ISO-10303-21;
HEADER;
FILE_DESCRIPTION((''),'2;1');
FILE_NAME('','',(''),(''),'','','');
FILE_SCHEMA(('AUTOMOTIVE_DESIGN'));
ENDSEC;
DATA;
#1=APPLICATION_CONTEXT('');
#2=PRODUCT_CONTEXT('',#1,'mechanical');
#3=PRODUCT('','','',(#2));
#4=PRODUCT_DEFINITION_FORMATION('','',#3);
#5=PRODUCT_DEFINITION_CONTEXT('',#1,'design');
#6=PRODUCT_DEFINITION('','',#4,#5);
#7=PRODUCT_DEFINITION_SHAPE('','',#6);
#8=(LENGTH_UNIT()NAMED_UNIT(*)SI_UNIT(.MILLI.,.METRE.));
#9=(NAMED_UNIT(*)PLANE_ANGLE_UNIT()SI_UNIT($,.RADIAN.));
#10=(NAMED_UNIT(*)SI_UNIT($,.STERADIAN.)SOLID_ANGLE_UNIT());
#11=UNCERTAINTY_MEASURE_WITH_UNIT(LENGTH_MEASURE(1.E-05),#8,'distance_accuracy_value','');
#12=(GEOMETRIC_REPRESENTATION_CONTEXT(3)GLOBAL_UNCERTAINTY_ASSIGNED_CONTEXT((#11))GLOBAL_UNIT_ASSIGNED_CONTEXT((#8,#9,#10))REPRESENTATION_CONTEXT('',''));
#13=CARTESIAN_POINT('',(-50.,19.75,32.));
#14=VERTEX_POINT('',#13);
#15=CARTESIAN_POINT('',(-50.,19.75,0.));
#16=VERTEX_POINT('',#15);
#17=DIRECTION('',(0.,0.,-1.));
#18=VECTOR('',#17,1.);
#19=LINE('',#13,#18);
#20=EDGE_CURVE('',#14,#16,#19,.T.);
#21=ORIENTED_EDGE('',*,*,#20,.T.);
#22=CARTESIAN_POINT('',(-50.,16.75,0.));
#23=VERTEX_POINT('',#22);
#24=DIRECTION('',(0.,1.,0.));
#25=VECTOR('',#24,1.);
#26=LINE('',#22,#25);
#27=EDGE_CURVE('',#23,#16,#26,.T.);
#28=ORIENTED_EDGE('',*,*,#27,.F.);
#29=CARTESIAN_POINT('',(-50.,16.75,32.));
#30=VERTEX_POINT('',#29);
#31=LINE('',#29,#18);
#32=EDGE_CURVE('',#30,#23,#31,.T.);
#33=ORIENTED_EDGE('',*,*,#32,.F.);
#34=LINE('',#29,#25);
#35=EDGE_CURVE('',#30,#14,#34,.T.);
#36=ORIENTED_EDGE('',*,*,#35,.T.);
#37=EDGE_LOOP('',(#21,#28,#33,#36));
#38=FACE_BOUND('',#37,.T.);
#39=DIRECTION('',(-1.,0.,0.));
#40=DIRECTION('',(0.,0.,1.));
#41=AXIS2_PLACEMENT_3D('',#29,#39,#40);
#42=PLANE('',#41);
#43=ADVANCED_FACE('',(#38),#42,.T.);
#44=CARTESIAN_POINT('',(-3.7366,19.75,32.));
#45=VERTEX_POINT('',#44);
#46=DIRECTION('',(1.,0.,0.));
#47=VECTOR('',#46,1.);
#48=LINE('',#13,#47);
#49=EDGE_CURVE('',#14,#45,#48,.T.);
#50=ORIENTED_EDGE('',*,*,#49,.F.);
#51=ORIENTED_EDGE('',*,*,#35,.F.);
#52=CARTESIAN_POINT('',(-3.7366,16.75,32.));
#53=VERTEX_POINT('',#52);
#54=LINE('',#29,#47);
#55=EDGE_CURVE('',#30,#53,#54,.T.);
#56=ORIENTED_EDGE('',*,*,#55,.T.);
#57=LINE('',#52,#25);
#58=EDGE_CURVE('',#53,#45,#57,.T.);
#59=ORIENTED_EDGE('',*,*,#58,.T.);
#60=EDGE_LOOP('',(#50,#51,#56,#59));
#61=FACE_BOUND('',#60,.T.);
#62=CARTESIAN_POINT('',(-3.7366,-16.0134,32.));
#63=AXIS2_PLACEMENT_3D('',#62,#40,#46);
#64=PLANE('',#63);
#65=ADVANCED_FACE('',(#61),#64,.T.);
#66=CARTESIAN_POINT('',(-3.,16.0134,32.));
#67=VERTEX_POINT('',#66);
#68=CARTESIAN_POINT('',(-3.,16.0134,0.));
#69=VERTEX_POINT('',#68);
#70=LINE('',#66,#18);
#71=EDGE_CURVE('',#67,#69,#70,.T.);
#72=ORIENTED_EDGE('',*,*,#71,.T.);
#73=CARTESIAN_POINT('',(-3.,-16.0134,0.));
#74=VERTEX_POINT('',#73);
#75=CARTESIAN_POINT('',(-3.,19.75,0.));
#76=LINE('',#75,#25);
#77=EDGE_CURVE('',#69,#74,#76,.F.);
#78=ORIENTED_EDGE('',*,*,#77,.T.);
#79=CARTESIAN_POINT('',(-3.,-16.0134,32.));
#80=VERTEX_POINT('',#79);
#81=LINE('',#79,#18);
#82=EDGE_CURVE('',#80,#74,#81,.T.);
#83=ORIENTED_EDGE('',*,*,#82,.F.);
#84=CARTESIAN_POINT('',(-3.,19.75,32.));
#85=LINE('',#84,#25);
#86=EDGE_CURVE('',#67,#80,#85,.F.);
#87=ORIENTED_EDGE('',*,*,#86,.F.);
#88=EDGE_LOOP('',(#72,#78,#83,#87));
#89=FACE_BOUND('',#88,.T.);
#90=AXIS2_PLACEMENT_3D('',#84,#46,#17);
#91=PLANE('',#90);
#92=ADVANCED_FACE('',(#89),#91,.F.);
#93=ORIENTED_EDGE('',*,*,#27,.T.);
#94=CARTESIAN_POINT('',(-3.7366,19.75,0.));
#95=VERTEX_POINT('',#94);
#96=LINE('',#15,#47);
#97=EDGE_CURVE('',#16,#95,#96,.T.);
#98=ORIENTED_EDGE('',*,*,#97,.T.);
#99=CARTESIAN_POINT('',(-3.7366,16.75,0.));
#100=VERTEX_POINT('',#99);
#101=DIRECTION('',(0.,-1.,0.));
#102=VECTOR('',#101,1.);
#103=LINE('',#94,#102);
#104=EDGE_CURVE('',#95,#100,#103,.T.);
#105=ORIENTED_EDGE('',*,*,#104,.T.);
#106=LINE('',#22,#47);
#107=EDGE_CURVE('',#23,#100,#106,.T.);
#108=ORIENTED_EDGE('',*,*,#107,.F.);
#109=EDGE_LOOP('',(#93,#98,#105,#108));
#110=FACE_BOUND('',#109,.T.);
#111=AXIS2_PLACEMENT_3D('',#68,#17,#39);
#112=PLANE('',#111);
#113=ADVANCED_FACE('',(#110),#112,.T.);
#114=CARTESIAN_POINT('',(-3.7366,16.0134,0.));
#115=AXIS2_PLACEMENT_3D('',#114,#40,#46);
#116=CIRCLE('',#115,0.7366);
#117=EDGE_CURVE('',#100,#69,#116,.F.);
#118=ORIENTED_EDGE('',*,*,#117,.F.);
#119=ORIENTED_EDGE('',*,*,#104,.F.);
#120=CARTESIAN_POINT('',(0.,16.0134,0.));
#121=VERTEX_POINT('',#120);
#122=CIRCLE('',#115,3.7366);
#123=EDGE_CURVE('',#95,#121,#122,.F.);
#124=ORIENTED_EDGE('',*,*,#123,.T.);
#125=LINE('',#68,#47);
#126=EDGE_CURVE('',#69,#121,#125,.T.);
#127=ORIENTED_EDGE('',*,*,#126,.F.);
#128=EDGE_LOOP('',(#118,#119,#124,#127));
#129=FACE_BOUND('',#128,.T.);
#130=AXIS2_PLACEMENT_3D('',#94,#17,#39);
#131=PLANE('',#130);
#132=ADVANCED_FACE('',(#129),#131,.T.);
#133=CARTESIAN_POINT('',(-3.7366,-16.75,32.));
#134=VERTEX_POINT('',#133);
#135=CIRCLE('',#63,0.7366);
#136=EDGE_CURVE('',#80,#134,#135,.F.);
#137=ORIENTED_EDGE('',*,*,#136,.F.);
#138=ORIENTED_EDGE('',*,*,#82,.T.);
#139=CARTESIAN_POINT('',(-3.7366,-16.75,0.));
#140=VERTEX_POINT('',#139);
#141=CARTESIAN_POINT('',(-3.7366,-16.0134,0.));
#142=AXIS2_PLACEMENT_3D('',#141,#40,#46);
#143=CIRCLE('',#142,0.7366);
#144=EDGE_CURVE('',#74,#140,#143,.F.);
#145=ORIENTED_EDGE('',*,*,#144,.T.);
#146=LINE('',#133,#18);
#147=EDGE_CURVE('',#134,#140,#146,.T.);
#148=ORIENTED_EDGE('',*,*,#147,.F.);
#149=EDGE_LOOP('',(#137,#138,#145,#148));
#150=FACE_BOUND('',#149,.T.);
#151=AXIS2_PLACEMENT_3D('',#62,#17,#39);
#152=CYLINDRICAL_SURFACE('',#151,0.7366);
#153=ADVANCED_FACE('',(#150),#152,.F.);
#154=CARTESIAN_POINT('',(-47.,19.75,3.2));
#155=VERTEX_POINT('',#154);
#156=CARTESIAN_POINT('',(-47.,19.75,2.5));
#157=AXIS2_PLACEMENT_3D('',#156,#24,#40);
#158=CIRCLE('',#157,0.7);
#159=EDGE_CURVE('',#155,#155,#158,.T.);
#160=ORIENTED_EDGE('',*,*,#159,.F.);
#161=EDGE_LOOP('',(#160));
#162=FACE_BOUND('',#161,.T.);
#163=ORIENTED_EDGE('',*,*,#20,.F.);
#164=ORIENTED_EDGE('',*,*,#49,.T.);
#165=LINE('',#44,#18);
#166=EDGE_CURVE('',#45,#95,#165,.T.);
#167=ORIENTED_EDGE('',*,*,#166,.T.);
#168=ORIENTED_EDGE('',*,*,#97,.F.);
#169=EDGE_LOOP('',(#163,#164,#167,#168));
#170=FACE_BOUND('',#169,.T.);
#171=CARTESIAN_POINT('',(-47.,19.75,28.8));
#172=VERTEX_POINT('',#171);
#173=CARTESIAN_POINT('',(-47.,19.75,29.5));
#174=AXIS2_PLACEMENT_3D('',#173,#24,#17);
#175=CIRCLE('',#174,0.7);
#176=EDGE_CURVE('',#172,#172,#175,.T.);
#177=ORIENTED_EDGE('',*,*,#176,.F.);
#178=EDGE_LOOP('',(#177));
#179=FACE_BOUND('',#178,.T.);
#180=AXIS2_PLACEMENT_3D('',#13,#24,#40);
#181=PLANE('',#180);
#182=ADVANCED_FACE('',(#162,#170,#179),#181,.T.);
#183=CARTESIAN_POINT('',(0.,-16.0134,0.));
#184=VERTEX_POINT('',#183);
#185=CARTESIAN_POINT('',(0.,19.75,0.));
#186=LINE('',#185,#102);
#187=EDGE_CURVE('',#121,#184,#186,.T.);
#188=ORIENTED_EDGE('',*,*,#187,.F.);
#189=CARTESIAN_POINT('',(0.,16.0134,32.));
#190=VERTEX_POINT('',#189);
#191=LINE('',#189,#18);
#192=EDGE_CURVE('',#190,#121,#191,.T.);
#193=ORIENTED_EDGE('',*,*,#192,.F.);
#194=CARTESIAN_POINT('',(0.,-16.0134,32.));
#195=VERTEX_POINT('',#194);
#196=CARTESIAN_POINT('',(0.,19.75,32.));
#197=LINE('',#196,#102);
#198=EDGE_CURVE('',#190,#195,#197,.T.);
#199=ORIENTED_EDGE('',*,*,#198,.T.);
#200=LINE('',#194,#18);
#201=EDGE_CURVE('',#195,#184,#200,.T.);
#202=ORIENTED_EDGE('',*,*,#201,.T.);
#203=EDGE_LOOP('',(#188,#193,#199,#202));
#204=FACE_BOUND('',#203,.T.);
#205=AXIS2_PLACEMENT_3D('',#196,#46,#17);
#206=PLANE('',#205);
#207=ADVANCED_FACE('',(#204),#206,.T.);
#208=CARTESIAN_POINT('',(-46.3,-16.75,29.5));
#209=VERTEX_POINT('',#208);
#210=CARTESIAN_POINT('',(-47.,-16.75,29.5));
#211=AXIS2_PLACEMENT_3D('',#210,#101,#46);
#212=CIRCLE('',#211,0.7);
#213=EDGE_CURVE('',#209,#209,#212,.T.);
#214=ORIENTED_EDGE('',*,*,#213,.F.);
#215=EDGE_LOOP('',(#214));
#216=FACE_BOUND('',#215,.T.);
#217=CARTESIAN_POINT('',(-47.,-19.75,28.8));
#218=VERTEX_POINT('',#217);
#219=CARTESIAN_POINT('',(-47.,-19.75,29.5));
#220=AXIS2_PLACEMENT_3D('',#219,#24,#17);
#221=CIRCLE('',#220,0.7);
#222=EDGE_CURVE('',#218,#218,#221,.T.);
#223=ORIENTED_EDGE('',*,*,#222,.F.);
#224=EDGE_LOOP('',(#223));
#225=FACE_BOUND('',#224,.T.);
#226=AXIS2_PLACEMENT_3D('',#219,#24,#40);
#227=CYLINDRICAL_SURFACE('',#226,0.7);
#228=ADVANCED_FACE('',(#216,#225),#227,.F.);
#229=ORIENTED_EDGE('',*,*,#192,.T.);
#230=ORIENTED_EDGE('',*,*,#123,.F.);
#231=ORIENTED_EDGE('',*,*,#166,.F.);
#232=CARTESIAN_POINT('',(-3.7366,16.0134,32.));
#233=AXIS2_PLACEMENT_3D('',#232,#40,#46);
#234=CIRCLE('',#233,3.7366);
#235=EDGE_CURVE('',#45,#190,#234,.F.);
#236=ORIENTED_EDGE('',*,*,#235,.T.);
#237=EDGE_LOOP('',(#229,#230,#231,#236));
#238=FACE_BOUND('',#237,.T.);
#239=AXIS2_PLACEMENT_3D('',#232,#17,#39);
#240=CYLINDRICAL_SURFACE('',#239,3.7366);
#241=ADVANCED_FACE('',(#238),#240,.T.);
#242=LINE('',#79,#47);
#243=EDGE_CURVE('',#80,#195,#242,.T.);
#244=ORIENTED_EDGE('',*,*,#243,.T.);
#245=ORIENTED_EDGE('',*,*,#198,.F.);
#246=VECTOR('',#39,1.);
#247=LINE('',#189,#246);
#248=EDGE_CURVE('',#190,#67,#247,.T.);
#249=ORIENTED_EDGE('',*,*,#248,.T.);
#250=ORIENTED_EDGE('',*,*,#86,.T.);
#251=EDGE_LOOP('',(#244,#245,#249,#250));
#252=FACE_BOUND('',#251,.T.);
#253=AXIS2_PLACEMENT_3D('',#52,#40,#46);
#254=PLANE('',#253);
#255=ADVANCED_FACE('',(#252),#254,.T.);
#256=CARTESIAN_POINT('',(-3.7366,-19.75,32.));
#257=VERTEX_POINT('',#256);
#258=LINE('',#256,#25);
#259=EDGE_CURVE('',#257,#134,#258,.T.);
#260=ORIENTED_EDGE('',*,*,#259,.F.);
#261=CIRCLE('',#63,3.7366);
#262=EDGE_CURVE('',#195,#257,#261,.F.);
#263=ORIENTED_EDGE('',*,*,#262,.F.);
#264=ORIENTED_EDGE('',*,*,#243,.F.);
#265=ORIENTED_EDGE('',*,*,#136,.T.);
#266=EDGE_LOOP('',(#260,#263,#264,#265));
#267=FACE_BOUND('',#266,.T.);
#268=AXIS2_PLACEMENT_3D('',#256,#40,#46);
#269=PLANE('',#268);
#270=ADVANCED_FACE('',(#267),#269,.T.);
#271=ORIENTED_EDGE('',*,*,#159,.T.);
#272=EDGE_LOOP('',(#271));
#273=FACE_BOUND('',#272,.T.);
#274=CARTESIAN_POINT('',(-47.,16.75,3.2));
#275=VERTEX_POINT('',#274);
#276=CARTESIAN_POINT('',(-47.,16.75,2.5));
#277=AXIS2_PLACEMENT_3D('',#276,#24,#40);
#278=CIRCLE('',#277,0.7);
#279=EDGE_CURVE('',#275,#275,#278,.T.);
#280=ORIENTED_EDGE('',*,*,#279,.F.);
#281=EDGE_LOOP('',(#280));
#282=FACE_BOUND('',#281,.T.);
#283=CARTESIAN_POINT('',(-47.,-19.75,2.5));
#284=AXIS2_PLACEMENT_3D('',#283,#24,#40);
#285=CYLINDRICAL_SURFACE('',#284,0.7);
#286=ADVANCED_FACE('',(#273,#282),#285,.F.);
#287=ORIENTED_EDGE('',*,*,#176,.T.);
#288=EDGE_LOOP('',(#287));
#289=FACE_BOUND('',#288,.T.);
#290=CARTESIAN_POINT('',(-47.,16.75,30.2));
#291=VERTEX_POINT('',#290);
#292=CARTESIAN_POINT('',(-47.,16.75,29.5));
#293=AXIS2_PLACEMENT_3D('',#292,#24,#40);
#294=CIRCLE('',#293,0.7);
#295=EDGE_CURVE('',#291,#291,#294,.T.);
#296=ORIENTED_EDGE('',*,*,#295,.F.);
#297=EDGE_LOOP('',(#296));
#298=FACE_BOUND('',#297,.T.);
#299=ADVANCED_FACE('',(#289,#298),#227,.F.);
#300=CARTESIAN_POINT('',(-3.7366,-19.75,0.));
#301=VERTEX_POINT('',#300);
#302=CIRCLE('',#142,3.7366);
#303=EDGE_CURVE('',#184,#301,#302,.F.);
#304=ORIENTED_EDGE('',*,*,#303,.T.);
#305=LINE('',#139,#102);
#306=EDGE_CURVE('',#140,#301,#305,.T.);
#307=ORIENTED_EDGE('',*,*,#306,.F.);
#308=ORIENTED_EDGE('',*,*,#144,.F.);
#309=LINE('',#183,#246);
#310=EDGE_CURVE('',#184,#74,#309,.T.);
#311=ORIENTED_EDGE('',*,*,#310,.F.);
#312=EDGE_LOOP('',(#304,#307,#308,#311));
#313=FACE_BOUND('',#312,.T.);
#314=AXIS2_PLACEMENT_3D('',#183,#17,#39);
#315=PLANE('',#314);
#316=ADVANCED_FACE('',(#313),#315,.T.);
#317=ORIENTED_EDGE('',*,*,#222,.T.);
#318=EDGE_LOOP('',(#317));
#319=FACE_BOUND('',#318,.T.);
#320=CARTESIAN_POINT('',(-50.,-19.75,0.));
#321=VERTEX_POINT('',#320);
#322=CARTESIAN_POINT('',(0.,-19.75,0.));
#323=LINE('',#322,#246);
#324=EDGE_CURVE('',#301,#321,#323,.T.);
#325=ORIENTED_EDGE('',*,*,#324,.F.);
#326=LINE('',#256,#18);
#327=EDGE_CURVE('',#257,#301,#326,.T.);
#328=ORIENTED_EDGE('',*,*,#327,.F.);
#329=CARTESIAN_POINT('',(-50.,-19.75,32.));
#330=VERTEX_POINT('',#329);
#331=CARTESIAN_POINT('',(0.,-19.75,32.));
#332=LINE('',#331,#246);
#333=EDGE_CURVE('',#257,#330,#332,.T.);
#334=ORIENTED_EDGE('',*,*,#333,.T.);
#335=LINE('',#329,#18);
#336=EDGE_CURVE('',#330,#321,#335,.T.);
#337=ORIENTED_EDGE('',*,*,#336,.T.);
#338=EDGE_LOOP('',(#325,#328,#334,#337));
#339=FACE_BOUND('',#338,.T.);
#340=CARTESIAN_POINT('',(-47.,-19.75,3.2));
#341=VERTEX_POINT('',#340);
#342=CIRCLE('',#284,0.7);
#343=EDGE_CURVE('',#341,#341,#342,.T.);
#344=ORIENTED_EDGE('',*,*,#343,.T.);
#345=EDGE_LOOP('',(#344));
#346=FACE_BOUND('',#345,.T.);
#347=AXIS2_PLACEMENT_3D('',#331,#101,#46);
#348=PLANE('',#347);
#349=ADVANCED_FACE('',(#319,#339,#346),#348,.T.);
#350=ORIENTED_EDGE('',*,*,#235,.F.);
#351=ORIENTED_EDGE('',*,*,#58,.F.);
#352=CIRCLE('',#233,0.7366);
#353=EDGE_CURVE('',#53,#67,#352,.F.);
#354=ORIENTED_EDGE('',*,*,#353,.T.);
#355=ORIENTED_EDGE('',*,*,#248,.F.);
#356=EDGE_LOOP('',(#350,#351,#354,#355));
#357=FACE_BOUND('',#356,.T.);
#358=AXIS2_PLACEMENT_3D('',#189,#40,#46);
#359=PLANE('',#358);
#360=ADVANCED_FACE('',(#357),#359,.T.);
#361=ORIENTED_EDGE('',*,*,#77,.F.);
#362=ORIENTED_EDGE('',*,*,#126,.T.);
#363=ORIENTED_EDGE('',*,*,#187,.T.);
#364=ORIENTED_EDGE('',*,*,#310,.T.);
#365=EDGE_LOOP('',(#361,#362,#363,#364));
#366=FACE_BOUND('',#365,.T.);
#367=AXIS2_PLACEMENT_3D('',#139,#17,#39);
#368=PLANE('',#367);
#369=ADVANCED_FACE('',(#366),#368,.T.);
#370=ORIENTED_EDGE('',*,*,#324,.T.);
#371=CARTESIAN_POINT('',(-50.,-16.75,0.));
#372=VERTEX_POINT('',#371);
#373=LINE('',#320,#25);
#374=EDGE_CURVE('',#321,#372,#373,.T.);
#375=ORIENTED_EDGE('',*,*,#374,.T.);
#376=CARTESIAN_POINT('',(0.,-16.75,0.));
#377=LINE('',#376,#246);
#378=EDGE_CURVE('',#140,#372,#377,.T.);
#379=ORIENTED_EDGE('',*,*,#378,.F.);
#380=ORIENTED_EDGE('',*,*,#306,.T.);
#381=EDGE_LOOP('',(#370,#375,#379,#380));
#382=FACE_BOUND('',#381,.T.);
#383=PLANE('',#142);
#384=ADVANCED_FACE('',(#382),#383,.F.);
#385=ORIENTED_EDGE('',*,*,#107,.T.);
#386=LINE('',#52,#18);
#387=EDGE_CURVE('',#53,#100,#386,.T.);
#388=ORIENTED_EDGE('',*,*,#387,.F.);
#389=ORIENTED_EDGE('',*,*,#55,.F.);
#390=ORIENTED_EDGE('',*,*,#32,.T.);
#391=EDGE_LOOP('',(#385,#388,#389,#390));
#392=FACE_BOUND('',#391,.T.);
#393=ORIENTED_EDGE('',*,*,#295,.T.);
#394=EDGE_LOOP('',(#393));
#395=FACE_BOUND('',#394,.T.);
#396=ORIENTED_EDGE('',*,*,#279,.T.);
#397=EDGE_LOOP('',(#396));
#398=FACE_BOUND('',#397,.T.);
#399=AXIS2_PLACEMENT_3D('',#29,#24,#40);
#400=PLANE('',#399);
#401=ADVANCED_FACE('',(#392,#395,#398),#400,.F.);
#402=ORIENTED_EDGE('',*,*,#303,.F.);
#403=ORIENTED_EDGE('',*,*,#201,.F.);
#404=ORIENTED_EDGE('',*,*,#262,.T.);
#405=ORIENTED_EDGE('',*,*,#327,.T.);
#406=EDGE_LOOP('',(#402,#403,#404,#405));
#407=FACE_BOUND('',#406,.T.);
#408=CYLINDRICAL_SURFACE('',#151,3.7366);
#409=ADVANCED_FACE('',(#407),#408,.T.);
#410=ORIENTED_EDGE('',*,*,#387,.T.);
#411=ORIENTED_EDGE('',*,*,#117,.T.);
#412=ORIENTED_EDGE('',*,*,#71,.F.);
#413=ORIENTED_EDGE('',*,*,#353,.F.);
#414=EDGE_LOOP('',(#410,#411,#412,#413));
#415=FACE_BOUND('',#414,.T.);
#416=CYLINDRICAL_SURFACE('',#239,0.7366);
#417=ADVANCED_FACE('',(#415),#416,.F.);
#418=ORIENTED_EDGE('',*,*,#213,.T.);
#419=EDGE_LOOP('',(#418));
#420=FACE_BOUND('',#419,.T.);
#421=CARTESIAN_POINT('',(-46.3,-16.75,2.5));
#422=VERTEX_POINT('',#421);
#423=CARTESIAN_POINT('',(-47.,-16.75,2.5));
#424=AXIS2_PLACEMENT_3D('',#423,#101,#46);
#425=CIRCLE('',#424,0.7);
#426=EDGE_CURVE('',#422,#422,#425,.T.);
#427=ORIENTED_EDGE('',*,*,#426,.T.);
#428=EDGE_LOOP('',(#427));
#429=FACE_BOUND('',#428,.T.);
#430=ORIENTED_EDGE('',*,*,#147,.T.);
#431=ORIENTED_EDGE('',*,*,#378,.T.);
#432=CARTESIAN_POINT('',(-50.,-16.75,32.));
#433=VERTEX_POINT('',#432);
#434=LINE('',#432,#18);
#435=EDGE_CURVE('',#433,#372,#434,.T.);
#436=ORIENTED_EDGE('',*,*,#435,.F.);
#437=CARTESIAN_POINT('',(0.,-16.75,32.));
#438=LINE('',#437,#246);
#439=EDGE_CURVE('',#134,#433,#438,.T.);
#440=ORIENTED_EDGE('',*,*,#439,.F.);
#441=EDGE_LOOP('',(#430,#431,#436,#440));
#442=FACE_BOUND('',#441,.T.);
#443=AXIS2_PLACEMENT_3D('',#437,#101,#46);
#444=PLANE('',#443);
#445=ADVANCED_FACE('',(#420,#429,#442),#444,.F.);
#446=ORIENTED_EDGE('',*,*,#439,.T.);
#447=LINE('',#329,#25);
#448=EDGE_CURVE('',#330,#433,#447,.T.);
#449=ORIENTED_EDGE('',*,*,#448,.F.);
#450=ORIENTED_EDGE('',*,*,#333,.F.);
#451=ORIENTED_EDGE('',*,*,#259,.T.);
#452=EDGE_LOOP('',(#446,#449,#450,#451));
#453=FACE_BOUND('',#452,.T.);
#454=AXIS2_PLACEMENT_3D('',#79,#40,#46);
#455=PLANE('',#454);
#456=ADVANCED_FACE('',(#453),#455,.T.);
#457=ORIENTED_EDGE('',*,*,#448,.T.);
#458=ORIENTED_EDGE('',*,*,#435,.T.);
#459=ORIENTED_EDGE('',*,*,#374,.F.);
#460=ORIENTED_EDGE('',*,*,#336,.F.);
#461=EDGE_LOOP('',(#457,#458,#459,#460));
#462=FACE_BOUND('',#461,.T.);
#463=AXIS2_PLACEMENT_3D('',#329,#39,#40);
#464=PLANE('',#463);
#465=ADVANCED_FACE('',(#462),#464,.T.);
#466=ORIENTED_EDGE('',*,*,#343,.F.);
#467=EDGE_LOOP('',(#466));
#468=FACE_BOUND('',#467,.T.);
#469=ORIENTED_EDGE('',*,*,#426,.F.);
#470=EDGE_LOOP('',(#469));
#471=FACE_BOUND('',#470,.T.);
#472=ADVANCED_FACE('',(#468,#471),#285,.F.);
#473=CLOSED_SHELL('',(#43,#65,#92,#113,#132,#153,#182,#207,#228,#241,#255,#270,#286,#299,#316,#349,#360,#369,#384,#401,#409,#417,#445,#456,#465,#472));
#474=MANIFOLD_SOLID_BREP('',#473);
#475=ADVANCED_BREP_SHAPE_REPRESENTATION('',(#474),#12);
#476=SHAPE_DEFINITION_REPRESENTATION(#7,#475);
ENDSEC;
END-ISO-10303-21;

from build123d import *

# Parameters (mm, degrees)
T_LE_DE_BASE_PLI_E1_DEPTH = 32
ESQUISSE6_R               = 0.7
ENL_V_MAT_EXTRU_1_DEPTH   = 72.303926961


# Sheet-metal steps are written as plain solids
with BuildPart() as part:
    # Esquisse1 → Tôle de base pliée1 (new body)
    with BuildSketch(Plane.XY):
        with BuildLine():
            Line((-50, 19.75), (-3.7366, 19.75))
            ThreePointArc((-3.7366, 19.75), (-1.094424801, 18.655575199), (0, 16.0134))
            Line((0, 16.0134), (0, -16.0134))
            ThreePointArc((0, -16.0134), (-1.094424801, -18.655575199), (-3.7366, -19.75))
            Line((-3.7366, -19.75), (-50, -19.75))
            Line((-50, -19.75), (-50, -16.75))
            Line((-50, -16.75), (-3.7366, -16.75))
            ThreePointArc((-3.7366, -16.75), (-3.215745145, -16.534254855), (-3, -16.0134))
            Line((-3, -16.0134), (-3, 16.0134))
            ThreePointArc((-3, 16.0134), (-3.215745145, 16.534254855), (-3.7366, 16.75))
            Line((-3.7366, 16.75), (-50, 16.75))
            Line((-50, 16.75), (-50, 19.75))
        make_face()
    extrude(amount=T_LE_DE_BASE_PLI_E1_DEPTH)

    # Esquisse6 → Enlèv. mat.-Extru.1 (cut, through all)
    with BuildSketch(Plane(origin=(0, 19.75, 0), x_dir=(1, 0, 0), z_dir=(0, 1, 0))):
        with Locations(Location((-47, -2.5, 0), (0, 0, 270))):
            Circle(ESQUISSE6_R)
        with Locations(Location((-47, -29.5, 0), (0, 0, 270))):
            Circle(ESQUISSE6_R)
    extrude(amount=-ENL_V_MAT_EXTRU_1_DEPTH, mode=Mode.SUBTRACT)


solid = part.part
